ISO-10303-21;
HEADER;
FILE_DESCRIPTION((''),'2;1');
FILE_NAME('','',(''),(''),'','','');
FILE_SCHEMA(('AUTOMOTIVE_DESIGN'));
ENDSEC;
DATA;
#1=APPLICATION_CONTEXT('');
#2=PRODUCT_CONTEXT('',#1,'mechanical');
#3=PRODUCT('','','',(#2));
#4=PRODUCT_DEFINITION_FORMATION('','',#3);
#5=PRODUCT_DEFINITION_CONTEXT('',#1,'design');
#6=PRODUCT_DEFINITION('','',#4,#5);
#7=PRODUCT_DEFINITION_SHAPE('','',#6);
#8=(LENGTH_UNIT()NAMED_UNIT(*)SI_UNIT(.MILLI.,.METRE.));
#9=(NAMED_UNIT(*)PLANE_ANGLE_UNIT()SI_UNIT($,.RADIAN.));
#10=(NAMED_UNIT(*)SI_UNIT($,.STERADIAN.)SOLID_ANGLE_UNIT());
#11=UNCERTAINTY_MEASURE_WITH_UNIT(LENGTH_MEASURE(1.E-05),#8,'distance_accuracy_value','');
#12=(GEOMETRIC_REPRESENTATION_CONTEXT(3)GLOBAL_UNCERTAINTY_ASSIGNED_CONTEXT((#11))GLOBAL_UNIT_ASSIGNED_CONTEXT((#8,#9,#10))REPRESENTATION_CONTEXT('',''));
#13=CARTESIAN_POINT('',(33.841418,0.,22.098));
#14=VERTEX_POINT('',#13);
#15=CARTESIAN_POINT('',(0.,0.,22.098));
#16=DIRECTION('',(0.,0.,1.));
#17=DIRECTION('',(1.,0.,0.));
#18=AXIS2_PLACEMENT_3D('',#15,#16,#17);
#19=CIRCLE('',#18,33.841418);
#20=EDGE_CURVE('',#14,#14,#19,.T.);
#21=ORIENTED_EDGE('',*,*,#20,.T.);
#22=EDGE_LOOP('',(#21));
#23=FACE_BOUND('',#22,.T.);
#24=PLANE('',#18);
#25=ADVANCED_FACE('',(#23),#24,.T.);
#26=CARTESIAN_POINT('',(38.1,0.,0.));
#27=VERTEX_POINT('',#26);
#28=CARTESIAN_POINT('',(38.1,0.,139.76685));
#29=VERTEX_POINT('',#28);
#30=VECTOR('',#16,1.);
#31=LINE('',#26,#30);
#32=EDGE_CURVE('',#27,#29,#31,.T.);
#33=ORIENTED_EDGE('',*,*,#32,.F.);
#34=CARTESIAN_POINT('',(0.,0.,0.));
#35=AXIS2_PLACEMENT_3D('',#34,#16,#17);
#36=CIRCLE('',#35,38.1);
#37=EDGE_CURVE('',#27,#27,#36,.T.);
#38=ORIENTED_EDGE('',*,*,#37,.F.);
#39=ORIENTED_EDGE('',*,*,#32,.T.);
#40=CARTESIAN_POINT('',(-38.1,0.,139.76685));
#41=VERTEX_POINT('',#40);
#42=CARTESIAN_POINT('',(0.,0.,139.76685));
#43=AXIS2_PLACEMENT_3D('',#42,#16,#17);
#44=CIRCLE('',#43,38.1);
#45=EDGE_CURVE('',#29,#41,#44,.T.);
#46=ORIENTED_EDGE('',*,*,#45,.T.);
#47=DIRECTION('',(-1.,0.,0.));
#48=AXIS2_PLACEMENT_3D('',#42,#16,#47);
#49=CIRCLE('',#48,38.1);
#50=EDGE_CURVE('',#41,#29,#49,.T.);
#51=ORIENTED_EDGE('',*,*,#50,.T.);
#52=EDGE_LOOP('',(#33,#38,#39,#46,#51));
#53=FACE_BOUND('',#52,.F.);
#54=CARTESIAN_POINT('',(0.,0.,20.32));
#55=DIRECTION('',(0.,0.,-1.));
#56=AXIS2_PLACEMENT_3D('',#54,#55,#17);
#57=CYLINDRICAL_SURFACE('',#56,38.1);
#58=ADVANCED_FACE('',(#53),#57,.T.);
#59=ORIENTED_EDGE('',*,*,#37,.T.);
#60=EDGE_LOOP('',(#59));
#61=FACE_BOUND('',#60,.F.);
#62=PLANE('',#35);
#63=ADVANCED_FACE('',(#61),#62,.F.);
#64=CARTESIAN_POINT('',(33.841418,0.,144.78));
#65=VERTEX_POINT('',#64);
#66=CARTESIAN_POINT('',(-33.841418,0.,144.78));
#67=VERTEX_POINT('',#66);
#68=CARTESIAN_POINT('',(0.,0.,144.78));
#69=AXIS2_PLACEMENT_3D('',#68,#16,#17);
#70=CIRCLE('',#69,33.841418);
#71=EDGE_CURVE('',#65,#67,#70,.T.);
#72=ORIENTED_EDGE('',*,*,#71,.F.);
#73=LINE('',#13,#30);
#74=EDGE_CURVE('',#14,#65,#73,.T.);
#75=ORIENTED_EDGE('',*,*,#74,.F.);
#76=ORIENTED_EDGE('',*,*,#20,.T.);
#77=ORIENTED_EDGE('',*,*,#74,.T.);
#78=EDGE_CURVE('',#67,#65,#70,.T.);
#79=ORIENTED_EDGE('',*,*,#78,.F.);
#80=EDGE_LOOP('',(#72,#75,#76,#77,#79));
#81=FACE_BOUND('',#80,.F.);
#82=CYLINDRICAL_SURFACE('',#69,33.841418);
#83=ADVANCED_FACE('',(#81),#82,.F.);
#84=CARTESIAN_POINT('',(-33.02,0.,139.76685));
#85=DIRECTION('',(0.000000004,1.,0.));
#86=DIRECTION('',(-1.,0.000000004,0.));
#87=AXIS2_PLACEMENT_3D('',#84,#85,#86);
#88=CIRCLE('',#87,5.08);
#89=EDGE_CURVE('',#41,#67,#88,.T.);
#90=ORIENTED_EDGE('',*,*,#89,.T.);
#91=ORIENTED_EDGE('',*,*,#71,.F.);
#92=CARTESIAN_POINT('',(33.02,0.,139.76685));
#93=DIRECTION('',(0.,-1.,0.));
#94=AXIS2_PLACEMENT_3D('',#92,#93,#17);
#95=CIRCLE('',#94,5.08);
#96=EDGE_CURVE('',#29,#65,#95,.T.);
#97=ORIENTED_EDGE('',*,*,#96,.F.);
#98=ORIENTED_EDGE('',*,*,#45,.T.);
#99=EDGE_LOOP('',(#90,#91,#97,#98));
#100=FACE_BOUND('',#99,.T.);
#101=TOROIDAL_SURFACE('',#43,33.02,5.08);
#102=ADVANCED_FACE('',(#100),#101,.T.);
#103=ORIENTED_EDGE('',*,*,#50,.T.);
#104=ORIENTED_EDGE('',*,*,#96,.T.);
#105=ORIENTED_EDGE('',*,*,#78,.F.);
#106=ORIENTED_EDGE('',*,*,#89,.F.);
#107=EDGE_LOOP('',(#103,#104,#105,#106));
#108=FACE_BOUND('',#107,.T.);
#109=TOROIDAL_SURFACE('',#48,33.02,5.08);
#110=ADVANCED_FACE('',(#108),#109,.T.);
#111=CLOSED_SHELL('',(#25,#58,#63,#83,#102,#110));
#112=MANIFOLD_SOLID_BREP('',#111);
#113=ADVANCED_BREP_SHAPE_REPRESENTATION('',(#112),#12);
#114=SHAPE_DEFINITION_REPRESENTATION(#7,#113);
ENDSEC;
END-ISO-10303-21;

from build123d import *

# Parameters (mm, degrees)
F0_R        = 38.1
F1_DEPTH    = 20.32
F2_R        = 38.1
F3_DEPTH    = 124.46
F5_DEPTH    = 122.682
F6_T2_ANGLE = 179.9999997765
F6_T4_ANGLE = 180.0000002235


# Not quite as in the source:
# - a fillet or chamfer that OpenCascade refuses, or shapes differently, is made with other operations: its cross-section is extruded or revolved along the edge and cut away or added
# - a feature names something its author has since deleted; it is built from what else it names


with BuildPart() as f1:
    # F0 (on Top) → F1 (new body)
    with BuildSketch(Plane.XY):
        Circle(F0_R)
    extrude(amount=F1_DEPTH)

    # F2 (on face) → F3 (join)
    with BuildSketch(Plane.XY.offset(20.32)):
        Circle(F2_R)
    extrude(amount=F3_DEPTH)

    # F4 (on face) → F5 (cut, symmetric)
    with BuildSketch(Plane.XY.offset(144.78)):
        with BuildLine():
            ThreePointArc((-33.8414182484, 0), (0, -33.8414182484), (33.8414182484, 0))
            ThreePointArc((33.8414182484, 0), (0, 33.8414182484), (-33.8414182484, 0))
        make_face()
    extrude(amount=F5_DEPTH, both=True, mode=Mode.SUBTRACT)

    # F6: fillet of radius 5.08 on 1 edges, made by hand

    # F6_s1 → F6_t2 (revolve, cut)
    with BuildSketch(Plane.XZ):
        with BuildLine():
            ThreePointArc((38.1, 139.7668500859), (36.8916407828, 143.0557401189), (33.8414182484, 144.78))
            Line((33.8414182484, 144.78), (38.1, 144.78))
            Line((38.1, 144.78), (38.1, 139.7668500859))
        make_face()
    revolve(axis=Axis((0, 0, 144.78), (0, 0, 1)), revolution_arc=F6_T2_ANGLE, mode=Mode.SUBTRACT)

    # F6_s3 → F6_t4 (revolve, cut)
    with BuildSketch(Plane.XZ):
        with BuildLine():
            ThreePointArc((-38.1, 139.7668500859), (-36.8916407828, 143.0557401189), (-33.8414182484, 144.78))
            Line((-33.8414182484, 144.78), (-38.1, 144.78))
            Line((-38.1, 144.78), (-38.1, 139.7668500859))
        make_face()
    revolve(axis=Axis((0, 0, 144.78), (0, 0, 1)), revolution_arc=F6_T4_ANGLE, mode=Mode.SUBTRACT)


solid = f1.part
